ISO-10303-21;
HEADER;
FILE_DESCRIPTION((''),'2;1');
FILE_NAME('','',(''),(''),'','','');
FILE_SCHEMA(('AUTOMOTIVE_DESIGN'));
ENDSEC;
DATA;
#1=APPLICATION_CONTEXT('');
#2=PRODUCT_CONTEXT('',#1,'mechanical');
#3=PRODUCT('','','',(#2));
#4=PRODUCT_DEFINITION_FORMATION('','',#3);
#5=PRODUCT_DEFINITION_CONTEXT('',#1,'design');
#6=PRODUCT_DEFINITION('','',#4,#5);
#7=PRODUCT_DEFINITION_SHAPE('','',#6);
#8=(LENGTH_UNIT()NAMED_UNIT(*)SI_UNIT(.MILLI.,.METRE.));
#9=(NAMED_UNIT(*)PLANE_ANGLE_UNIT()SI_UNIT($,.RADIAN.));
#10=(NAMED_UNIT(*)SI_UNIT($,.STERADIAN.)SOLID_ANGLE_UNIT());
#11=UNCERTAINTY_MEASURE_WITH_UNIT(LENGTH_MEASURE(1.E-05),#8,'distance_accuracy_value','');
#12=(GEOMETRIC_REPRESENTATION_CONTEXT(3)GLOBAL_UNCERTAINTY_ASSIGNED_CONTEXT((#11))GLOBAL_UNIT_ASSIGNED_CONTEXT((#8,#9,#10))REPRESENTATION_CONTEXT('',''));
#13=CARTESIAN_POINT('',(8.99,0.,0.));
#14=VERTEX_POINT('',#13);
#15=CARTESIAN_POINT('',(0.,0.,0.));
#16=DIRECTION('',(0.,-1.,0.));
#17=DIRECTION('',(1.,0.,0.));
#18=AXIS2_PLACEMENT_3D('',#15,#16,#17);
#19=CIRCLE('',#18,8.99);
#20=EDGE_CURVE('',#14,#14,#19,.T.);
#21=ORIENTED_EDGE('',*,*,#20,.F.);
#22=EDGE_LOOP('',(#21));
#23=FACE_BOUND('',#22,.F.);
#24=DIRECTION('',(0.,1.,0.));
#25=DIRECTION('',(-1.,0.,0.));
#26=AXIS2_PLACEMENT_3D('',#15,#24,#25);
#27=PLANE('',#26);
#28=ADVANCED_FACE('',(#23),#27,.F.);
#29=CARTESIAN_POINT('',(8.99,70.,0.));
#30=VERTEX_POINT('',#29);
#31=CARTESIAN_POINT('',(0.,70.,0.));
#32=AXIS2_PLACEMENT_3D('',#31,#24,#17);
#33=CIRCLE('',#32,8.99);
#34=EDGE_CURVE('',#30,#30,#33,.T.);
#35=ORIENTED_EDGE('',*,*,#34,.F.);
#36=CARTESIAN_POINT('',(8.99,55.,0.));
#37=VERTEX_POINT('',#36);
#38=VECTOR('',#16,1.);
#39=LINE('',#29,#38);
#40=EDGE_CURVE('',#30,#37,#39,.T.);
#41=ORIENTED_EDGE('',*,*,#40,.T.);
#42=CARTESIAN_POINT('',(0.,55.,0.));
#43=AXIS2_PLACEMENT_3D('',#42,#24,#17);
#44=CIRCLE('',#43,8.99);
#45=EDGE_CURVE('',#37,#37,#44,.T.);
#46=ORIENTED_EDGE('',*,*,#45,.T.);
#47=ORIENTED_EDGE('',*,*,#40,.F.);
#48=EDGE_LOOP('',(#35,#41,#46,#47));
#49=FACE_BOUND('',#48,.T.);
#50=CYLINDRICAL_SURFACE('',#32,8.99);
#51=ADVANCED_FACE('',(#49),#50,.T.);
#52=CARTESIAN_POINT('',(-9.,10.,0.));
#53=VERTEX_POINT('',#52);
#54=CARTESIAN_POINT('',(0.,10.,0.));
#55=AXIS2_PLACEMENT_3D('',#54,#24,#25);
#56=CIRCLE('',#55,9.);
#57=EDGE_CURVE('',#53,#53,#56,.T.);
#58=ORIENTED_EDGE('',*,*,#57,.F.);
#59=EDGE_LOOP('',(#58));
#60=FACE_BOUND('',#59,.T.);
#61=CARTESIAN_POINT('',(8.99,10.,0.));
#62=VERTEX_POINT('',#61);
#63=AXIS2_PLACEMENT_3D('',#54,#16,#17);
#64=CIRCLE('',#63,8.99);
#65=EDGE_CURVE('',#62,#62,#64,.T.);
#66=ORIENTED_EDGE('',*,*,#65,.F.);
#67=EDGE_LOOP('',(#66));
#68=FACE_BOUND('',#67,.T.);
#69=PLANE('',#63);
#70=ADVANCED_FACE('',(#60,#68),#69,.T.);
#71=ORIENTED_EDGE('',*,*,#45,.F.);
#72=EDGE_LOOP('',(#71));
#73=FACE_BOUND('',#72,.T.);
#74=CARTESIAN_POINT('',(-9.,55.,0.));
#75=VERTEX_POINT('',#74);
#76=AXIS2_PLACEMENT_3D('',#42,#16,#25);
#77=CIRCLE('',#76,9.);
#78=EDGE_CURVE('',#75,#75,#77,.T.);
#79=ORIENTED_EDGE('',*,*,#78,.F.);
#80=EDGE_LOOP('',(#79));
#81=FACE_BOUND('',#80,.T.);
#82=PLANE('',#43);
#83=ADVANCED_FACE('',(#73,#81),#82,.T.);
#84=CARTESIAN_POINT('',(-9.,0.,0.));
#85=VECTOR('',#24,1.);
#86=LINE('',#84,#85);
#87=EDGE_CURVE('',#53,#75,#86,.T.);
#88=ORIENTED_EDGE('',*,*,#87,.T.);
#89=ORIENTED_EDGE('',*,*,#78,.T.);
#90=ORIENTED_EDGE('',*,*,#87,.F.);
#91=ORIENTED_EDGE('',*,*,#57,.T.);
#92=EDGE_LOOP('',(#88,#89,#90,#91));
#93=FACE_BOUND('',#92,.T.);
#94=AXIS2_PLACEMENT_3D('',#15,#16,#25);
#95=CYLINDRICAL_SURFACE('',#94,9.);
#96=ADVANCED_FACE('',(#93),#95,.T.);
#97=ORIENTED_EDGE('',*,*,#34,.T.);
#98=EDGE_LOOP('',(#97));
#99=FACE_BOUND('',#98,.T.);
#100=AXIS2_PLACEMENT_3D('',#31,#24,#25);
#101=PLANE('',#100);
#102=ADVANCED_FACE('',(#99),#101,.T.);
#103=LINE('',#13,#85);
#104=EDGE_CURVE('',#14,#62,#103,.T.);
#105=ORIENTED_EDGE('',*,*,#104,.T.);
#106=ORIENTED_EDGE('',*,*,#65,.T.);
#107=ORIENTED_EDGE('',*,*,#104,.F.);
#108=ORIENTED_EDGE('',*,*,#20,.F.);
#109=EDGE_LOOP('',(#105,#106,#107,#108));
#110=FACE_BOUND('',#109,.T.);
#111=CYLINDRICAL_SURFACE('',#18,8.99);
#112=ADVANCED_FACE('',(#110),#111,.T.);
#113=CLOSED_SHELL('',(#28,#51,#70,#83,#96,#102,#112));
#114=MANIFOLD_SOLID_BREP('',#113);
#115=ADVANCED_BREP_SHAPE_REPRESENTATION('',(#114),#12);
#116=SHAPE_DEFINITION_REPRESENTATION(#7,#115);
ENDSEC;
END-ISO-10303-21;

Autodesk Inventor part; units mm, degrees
ref_plane "YZ Plane" through (0, 0, 0) normal (1, 0, 0) x (0, 1, 0)
ref_plane "XZ Plane" through (0, 0, 0) normal (0, 1, 0) x (-1, 0, 0)
ref_plane "XY Plane" through (0, 0, 0) normal (0, 0, 1) x (1, 0, 0)
sketch "Sketch1" plane through (0, 0, 0) normal (0, 1, 0) x (-1, 0, 0)
  circle A0 centre (0, 0) radius 9
  dimension "d0" = 18
extrude "Extrusion1" add sketch "Sketch1" along normal blind 70
sketch "Sketch2" plane through (0, 70, 0) normal (0, 1, 0) x (1, 0, 0)
  circle A0 centre (0, 0) radius 9 projected
  circle A1 centre (0, 0) radius 8.99
  dimension "d3" = 0.01
extrude "Extrusion2" cut sketch "Sketch2" against normal blind 15
sketch "Sketch3" plane through (0, 0, 0) normal (0, -1, 0) x (1, 0, 0)
  circle A0 centre (0, 0) radius 9 projected
  circle A1 centre (0, 0) radius 8.99 projected
extrude "Extrusion3" cut sketch "Sketch3" against normal blind 10
thread "Thread1" size "M18x1" class "6g" standard "ANSI Metric M Profile" full length
properties part number "Inductive Sensor 18mmx70mm"
